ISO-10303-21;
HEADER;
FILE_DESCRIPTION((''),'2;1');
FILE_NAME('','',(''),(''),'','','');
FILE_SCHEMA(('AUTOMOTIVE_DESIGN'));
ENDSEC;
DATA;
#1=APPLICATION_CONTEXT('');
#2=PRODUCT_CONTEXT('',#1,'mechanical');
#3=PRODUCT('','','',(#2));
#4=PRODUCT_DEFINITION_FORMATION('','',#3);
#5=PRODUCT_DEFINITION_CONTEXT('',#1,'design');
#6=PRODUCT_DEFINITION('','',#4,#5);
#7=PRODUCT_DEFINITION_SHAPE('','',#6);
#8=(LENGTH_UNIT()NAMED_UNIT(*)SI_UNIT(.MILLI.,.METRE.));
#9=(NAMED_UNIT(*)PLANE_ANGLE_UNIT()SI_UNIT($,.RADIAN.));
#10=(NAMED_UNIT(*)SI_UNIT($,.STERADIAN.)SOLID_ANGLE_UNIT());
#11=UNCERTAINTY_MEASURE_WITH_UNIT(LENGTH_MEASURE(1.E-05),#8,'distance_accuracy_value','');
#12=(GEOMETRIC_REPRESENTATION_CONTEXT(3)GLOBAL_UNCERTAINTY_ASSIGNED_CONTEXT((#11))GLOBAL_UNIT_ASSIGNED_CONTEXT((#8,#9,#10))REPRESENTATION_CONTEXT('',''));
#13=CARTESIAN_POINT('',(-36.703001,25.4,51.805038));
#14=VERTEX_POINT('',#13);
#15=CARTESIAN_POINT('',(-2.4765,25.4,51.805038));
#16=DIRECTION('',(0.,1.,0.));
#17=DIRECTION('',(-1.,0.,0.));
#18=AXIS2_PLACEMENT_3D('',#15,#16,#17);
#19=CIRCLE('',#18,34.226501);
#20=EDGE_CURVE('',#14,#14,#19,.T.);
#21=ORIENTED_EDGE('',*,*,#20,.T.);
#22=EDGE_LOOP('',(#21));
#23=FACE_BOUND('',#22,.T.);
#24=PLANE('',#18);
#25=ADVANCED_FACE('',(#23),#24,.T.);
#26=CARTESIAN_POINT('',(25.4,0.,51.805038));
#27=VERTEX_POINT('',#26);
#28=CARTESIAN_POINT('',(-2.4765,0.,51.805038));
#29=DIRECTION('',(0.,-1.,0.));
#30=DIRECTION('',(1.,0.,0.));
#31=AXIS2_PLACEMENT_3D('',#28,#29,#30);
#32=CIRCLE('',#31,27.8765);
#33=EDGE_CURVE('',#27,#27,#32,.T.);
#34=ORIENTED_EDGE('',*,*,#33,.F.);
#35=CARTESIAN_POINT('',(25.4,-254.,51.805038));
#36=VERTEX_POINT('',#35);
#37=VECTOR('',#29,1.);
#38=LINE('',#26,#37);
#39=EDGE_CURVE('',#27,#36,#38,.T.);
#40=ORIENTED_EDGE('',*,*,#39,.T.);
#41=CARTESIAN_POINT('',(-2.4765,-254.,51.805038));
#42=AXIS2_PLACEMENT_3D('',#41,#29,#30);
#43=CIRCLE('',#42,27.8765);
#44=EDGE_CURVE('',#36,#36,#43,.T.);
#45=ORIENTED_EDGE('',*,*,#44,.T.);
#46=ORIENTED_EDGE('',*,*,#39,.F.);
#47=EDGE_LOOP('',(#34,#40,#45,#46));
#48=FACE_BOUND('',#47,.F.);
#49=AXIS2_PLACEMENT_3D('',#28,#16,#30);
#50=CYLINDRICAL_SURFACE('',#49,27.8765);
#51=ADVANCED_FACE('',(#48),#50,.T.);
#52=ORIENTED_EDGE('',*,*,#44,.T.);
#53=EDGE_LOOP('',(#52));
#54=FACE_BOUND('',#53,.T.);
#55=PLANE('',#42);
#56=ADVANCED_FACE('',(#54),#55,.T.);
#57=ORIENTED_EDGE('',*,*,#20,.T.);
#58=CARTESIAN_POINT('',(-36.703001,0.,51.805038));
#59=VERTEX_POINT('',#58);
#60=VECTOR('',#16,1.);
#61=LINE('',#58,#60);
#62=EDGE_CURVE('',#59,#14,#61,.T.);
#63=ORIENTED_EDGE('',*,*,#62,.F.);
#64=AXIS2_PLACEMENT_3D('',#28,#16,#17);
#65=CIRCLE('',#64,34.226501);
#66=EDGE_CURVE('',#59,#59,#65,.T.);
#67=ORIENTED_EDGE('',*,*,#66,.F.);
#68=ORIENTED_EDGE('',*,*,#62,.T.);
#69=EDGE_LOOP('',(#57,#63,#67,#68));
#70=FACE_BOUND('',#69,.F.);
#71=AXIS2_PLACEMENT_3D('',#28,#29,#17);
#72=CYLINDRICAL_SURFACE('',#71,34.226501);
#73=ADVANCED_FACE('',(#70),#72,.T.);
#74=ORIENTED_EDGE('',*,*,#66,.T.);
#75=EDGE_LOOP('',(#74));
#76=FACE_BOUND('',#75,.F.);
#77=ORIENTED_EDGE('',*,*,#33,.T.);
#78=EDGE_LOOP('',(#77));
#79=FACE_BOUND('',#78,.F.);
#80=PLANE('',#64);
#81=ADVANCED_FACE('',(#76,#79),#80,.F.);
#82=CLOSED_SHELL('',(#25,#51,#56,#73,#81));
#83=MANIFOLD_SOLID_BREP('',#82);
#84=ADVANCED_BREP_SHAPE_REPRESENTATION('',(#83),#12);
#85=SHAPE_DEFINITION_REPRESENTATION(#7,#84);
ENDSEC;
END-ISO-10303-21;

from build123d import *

# Parameters (mm, degrees)
F0_R     = 27.8765
F1_DEPTH = 254
F2_R     = 34.2265010133
F2_R_2   = 27.8765
F3_DEPTH = 25.4


with BuildPart() as f1:
    # F0 (on Front) → F1 (new body)
    with BuildSketch(Plane.XZ):
        with Locations((-2.4765, 51.8050380051)):
            Circle(F0_R)
    extrude(amount=F1_DEPTH)

    # F2 (on face) → F3 (join)
    with BuildSketch(Plane(origin=(0, 0, 0), x_dir=(-1, 0, 0), z_dir=(0, 1, 0))):
        with Locations((2.4765, 51.8050380051)):
            Circle(F2_R)
        with Locations((2.4765, 51.8050380051)):
            Circle(F2_R_2, mode=Mode.SUBTRACT)
        with Locations((2.4765, 51.8050380051)):
            Circle(F2_R_2)
    extrude(amount=F3_DEPTH)


solid = f1.part
